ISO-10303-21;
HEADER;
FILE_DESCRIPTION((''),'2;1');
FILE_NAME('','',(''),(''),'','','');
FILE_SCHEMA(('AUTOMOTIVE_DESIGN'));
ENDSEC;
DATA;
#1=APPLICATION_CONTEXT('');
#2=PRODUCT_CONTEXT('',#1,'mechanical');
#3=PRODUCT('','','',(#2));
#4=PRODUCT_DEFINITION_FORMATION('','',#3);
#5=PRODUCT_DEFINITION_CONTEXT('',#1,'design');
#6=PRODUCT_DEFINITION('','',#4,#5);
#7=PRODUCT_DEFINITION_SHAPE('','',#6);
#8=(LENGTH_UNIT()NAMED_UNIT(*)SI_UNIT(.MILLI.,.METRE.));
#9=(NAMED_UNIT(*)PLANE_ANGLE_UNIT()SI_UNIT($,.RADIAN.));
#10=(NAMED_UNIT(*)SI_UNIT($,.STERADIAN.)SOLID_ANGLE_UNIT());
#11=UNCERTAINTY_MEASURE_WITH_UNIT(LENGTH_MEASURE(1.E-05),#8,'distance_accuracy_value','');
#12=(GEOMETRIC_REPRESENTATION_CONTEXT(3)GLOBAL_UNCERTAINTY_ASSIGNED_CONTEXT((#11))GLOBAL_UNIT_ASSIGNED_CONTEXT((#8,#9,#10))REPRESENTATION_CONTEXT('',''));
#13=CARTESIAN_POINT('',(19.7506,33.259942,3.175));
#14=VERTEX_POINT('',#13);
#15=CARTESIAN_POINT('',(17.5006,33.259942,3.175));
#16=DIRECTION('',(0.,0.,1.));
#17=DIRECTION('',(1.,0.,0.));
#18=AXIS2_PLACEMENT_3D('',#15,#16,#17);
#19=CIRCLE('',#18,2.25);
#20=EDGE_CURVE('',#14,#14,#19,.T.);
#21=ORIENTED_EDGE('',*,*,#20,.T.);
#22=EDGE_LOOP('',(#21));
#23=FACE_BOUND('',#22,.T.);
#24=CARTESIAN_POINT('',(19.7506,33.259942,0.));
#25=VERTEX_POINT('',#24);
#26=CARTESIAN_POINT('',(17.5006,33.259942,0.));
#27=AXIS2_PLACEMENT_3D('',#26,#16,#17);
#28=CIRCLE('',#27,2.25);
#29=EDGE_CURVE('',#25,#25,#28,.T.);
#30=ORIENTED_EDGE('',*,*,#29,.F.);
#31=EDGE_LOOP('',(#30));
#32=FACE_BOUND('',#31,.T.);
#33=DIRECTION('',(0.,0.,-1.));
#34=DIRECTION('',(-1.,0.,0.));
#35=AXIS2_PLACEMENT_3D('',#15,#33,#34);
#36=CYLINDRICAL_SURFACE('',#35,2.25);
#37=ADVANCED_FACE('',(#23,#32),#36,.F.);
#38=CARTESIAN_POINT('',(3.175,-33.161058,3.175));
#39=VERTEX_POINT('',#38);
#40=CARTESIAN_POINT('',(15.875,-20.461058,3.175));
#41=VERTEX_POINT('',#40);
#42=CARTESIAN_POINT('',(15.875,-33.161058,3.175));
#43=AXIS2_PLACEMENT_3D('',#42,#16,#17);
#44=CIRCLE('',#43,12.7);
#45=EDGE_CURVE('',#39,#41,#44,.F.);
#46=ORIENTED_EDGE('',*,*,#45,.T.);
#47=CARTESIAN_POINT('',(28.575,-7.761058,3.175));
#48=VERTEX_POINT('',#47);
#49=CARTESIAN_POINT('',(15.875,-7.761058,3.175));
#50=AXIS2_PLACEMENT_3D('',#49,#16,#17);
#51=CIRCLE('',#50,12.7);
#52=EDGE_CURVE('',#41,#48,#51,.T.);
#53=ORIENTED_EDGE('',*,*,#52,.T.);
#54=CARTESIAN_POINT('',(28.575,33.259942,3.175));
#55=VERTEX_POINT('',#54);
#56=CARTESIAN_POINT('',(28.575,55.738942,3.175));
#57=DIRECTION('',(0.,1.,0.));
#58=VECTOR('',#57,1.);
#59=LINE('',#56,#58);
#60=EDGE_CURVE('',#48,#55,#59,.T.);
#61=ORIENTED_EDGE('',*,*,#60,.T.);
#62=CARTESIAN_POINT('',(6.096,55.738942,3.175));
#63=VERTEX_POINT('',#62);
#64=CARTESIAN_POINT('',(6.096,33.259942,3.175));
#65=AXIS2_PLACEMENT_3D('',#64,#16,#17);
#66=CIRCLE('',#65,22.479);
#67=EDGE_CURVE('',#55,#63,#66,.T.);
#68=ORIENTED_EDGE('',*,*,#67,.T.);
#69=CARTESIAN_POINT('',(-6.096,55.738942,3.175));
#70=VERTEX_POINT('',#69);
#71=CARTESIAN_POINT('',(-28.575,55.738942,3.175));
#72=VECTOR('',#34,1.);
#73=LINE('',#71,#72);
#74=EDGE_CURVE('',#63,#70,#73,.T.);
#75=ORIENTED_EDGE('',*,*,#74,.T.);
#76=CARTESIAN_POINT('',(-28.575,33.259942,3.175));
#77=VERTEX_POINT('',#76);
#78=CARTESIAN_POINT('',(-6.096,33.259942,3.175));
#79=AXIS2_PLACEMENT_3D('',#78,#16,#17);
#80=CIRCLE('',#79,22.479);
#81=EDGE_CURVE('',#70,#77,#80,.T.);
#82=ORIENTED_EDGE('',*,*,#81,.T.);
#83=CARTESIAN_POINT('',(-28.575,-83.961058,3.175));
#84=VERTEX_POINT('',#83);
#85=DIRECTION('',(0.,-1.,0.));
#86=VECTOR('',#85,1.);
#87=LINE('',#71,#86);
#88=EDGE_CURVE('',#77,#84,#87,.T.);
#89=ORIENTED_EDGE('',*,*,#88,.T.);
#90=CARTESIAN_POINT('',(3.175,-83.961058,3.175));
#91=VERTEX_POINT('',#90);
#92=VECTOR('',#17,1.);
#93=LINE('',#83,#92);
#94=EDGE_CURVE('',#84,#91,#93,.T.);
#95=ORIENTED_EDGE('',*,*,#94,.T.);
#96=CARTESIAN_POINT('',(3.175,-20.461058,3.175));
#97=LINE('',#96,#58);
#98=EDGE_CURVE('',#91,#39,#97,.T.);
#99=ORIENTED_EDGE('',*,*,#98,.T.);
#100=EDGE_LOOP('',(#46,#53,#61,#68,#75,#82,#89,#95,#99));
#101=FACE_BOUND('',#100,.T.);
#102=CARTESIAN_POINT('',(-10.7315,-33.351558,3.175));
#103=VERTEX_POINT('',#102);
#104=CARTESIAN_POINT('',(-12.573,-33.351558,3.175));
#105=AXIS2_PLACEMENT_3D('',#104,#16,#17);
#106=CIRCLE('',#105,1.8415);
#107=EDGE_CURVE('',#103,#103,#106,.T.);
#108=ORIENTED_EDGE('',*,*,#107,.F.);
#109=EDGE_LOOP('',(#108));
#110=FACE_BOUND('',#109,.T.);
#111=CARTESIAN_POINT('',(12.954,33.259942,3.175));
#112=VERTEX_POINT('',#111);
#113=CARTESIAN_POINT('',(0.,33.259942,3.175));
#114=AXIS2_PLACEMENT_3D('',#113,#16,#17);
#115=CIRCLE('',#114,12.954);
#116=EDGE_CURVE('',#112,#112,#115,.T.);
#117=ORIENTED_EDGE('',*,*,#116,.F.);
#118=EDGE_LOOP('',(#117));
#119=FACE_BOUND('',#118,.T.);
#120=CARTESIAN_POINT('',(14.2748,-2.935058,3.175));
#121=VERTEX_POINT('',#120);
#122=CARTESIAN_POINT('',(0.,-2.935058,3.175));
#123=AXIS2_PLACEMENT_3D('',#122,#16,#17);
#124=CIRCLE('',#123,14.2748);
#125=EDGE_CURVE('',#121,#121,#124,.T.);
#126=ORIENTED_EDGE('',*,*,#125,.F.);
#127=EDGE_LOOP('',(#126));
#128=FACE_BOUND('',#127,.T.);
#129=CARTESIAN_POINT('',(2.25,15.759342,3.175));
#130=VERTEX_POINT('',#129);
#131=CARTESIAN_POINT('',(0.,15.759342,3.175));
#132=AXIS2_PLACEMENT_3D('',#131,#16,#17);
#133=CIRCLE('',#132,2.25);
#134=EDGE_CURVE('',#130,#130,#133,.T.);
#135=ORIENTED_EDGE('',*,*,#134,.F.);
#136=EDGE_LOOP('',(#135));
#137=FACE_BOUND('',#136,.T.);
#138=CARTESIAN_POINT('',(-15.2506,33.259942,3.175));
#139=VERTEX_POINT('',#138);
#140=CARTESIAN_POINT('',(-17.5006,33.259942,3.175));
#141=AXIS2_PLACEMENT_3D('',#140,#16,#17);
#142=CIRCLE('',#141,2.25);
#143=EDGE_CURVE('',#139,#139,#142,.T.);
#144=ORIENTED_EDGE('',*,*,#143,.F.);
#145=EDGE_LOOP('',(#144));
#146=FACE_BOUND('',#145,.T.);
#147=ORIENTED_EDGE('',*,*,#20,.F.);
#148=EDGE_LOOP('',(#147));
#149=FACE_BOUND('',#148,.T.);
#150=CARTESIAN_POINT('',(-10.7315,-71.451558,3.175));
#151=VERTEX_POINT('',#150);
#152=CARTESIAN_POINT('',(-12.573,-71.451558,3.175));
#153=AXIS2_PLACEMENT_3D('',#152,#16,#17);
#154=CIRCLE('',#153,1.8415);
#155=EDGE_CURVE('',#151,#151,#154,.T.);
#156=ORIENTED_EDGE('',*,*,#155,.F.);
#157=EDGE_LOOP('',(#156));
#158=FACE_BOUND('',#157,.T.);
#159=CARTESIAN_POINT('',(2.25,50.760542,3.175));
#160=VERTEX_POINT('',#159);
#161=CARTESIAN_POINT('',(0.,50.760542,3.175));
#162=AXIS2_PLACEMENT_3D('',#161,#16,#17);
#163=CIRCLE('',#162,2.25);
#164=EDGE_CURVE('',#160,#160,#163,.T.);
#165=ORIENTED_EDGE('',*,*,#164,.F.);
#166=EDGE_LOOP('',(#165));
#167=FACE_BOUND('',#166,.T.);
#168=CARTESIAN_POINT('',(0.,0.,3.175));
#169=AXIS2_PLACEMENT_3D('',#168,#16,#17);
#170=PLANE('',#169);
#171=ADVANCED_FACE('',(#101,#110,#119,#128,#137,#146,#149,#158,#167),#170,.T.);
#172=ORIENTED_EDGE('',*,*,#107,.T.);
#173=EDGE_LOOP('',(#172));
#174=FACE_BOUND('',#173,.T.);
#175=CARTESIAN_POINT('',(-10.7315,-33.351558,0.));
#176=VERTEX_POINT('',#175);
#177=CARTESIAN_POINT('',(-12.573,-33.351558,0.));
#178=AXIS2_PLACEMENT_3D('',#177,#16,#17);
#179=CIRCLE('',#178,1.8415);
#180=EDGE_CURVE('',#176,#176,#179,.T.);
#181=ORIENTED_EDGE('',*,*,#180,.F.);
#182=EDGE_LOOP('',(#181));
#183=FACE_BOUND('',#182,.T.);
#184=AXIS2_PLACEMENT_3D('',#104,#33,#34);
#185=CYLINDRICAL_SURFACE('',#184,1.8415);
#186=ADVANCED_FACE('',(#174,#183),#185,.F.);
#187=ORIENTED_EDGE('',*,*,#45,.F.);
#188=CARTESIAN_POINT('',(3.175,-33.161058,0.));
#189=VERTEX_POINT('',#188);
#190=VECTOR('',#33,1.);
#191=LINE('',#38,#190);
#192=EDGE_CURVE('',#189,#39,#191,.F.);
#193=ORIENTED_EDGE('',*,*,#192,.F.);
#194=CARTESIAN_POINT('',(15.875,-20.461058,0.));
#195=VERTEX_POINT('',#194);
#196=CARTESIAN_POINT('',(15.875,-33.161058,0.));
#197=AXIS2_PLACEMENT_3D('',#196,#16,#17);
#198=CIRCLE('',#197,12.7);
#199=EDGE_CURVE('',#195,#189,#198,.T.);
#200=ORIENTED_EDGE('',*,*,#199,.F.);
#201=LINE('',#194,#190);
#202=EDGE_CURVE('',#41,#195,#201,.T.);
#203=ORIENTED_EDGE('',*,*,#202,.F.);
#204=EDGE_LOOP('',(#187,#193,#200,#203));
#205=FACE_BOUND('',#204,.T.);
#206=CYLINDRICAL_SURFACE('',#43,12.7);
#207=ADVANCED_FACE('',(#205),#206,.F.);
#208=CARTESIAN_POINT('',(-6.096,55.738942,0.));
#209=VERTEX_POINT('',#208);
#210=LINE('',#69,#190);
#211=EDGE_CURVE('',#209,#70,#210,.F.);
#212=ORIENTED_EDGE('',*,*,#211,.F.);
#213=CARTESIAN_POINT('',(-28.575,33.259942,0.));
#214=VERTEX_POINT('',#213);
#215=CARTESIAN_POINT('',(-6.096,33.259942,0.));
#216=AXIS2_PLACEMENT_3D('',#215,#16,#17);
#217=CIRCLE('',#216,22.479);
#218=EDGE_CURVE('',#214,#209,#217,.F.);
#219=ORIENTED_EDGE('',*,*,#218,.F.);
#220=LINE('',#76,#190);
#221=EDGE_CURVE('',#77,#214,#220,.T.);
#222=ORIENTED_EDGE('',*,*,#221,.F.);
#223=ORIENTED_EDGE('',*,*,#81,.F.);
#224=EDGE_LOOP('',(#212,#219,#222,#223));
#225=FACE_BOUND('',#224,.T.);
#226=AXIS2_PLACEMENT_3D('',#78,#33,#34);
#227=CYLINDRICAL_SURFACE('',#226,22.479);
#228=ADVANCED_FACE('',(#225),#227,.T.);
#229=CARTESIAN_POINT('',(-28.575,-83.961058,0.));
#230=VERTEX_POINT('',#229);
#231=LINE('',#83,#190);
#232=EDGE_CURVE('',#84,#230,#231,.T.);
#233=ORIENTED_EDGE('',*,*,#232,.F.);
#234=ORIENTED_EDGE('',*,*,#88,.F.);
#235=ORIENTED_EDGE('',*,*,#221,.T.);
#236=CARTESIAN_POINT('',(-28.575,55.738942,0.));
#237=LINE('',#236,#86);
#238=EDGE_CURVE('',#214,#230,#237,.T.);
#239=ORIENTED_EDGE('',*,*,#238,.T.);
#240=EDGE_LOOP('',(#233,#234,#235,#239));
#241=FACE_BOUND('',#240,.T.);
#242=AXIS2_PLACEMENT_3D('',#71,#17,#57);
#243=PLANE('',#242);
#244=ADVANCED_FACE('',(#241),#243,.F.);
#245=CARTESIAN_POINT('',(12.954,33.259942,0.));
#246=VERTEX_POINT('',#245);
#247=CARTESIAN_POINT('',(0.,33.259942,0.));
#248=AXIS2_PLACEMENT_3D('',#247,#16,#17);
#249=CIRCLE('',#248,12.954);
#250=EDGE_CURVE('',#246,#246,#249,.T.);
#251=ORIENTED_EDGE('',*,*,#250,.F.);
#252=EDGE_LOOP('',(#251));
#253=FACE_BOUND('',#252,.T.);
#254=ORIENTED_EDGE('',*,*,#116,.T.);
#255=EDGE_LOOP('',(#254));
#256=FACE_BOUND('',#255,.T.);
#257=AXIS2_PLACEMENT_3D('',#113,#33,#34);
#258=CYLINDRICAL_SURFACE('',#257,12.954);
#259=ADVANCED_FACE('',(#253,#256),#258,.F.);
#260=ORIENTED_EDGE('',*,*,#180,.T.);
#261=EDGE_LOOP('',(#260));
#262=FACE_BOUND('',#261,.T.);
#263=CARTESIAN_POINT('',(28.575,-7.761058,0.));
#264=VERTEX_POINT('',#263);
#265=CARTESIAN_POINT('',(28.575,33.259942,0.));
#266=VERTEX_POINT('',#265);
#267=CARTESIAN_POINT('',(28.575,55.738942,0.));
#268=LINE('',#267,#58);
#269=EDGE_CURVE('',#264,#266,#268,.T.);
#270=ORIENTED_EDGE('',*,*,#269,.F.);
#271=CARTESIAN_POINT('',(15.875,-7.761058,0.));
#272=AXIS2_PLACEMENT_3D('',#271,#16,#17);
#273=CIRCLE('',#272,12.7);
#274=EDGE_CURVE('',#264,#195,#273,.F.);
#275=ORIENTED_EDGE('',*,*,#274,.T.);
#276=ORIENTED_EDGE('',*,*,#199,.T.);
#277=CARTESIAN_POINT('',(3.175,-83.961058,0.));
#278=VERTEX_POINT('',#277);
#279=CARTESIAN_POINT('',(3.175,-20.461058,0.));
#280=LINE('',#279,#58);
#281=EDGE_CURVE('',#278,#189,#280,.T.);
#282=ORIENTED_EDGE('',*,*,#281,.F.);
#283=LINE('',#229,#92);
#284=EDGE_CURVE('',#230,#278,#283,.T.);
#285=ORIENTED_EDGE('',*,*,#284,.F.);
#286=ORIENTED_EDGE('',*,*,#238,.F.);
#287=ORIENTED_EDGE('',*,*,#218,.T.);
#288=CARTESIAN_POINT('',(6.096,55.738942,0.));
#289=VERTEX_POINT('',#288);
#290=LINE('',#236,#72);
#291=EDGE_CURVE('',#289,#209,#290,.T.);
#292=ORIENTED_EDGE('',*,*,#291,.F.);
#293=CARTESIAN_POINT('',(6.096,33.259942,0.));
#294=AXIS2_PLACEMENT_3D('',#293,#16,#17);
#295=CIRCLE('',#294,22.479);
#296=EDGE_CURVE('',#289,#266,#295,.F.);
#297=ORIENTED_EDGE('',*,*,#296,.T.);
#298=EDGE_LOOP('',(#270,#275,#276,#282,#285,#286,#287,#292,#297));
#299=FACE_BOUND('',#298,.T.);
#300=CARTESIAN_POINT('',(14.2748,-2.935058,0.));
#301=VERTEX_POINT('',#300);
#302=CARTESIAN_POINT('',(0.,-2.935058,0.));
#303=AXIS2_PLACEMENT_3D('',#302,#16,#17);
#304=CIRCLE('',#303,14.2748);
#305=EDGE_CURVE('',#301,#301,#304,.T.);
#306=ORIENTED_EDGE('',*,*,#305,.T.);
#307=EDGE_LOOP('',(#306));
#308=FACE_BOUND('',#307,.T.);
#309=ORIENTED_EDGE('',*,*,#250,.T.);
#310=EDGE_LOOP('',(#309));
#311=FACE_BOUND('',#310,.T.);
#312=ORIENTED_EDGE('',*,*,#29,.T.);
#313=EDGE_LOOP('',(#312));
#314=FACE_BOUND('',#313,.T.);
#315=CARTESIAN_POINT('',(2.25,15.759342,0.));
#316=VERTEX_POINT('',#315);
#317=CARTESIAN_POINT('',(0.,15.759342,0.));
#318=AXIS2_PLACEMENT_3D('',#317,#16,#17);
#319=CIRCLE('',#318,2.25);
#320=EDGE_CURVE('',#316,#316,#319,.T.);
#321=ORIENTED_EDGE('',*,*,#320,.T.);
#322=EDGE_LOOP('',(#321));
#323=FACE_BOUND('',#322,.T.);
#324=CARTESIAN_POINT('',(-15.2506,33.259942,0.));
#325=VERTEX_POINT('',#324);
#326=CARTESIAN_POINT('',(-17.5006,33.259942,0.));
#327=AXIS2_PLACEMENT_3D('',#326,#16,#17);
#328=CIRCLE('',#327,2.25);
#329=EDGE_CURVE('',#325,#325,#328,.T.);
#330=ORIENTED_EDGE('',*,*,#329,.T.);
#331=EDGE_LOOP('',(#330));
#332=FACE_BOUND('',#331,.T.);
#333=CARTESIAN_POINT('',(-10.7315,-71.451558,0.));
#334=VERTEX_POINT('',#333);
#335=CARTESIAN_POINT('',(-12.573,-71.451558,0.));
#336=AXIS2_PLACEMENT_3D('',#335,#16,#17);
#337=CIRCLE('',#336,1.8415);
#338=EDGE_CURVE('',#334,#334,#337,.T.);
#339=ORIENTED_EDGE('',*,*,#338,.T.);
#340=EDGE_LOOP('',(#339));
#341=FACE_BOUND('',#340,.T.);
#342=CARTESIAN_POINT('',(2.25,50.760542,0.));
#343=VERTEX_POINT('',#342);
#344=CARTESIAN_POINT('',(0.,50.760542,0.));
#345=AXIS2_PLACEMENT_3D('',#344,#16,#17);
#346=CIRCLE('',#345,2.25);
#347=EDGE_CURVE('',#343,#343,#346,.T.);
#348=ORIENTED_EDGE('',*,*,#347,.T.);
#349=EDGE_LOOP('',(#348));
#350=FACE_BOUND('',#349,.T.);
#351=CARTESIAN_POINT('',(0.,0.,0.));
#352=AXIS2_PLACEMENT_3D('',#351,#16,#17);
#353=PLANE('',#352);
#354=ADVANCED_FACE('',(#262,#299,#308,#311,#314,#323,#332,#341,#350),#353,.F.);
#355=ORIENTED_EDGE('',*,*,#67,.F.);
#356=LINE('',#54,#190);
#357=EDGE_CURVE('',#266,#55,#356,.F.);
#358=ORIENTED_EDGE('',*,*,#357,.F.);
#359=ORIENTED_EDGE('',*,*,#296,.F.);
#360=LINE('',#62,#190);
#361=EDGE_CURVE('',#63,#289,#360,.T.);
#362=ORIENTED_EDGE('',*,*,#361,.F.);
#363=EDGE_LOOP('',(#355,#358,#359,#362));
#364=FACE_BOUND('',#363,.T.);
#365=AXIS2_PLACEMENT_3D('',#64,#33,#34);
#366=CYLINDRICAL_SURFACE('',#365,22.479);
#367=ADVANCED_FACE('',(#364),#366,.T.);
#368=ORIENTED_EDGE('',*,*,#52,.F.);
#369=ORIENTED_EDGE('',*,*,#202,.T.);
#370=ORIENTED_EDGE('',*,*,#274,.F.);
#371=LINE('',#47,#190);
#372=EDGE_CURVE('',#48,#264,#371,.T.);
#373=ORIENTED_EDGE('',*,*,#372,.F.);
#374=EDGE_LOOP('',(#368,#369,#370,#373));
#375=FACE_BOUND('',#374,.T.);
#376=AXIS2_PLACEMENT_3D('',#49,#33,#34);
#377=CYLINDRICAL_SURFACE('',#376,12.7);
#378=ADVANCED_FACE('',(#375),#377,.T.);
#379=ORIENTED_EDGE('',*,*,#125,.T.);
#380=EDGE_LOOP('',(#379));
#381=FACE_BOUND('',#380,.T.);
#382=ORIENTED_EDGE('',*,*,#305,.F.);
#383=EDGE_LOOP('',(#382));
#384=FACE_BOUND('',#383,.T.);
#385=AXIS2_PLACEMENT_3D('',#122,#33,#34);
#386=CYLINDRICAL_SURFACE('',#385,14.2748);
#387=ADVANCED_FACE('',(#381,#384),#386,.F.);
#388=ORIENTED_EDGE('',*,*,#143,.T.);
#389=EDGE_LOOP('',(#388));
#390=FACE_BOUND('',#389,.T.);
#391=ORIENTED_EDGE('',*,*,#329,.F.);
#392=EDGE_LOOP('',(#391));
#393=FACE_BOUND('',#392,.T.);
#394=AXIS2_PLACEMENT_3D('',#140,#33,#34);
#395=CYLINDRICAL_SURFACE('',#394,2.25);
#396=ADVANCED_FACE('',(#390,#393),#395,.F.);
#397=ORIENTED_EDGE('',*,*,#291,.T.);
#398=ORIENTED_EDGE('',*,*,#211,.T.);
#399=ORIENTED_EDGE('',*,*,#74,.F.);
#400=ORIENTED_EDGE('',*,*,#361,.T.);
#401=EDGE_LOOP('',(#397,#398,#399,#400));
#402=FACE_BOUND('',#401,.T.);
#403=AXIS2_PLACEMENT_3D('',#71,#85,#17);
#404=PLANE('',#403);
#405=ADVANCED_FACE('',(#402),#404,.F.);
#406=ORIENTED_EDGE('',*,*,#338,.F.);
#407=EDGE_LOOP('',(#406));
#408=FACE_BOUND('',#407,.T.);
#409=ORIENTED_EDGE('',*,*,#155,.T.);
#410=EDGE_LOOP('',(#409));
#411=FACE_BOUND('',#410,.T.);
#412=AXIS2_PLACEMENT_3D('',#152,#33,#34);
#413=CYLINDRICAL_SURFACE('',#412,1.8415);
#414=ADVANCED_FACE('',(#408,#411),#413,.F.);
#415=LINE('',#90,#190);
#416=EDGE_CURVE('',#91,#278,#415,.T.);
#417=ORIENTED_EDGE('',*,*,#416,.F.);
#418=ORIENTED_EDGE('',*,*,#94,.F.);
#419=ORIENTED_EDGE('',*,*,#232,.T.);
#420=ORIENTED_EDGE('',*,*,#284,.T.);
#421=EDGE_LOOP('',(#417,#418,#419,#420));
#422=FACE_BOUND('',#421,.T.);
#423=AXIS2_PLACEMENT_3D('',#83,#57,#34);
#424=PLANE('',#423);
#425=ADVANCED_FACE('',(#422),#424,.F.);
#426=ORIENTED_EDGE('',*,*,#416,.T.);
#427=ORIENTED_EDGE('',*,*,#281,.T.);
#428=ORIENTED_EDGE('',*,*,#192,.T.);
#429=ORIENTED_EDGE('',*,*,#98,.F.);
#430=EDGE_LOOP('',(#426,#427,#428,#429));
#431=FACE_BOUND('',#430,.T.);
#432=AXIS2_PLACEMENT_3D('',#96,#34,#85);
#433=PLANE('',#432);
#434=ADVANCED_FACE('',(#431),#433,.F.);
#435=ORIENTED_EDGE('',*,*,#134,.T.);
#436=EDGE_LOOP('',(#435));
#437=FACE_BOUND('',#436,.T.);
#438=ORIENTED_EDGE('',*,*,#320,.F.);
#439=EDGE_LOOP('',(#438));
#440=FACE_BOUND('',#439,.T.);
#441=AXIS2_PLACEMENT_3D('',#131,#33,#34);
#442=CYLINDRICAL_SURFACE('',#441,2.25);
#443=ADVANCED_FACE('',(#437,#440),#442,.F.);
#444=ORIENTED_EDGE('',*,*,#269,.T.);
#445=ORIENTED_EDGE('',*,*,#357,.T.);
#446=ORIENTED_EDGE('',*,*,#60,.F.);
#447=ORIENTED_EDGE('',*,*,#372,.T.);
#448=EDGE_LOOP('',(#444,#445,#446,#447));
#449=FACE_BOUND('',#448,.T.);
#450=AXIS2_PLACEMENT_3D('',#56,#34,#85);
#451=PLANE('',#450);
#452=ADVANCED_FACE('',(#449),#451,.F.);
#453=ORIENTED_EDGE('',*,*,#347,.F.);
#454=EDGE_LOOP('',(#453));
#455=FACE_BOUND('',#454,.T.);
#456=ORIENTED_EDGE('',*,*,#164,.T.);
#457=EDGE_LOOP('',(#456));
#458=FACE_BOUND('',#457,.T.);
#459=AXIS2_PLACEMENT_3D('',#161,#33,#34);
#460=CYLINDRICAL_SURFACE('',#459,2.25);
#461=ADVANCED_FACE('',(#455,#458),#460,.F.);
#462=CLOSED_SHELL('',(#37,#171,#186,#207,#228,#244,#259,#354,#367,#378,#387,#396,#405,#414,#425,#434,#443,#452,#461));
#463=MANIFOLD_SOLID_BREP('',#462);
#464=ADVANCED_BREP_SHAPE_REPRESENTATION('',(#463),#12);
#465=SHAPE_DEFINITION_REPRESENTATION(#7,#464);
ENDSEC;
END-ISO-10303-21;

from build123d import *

# Parameters (mm, degrees)
SKETCH1_R           = 12.954
SKETCH1_R_2         = 2.25
SKETCH1_R_3         = 14.2748
SKETCH1_R_4         = 1.8415
BOSS_EXTRUDE1_DEPTH = 3.175
FILLET1_R           = 22.479
FILLET2_START       = -1
FILLET2_DEPTH       = 5
FILLET2_2_DEPTH     = 3.175


with BuildPart() as part:
    # Sketch1 → Boss-Extrude1 (new body)
    with BuildSketch(Plane.XY):
        Polygon((28.575, -20.461058414), (3.175, -20.461058414), (3.175, -83.961058414), (-28.575, -83.961058414), (-28.575, 55.738941586), (28.575, 55.738941586), align=None)
        with Locations((0, 33.259941586)):
            Circle(SKETCH1_R, mode=Mode.SUBTRACT)
        with Locations((0, 50.760541586)):
            Circle(SKETCH1_R_2, mode=Mode.SUBTRACT)
        with Locations((17.5006, 33.259941586)):
            Circle(SKETCH1_R_2, mode=Mode.SUBTRACT)
        with Locations((0, 15.759341586)):
            Circle(SKETCH1_R_2, mode=Mode.SUBTRACT)
        with Locations((-17.5006, 33.259941586)):
            Circle(SKETCH1_R_2, mode=Mode.SUBTRACT)
        with Locations((0, -2.935058414)):
            Circle(SKETCH1_R_3, mode=Mode.SUBTRACT)
        with Locations((-12.573, -33.351558414)):
            Circle(SKETCH1_R_4, mode=Mode.SUBTRACT)
        with Locations((-12.573, -71.451558414)):
            Circle(SKETCH1_R_4, mode=Mode.SUBTRACT)
    extrude(amount=BOSS_EXTRUDE1_DEPTH)

    # Fillet1
    fillet1_edges = [part.edges().sort_by_distance(p)[0] for p in [
        (-28.575, 55.738941586, 1.5875),
        (28.575, 55.738941586, 1.5875),
    ]]
    fillet(fillet1_edges, radius=FILLET1_R)

    # Fillet2: read off the stored shape, not the designer's step
    # Fillet2 outline → Fillet2 (cut)
    with BuildSketch(Plane.XY.offset(FILLET2_START)):
        with BuildLine():
            ThreePointArc((28.575, -7.761058414), (24.855256121, -16.741314535), (15.875, -20.461058414))
            Line((15.875, -20.461058414), (28.575, -20.461058414))
            Line((28.575, -20.461058414), (28.575, -7.761058414))
        make_face()
    extrude(amount=FILLET2_DEPTH, mode=Mode.SUBTRACT)

    # Fillet2 2 outline → Fillet2 2 (add)
    with BuildSketch(Plane.XY):
        with BuildLine():
            ThreePointArc((3.175, -33.161058414), (6.894743879, -24.180802293), (15.875, -20.461058414))
            Line((15.875, -20.461058414), (3.175, -20.461058414))
            Line((3.175, -20.461058414), (3.175, -33.161058414))
        make_face()
    extrude(amount=FILLET2_2_DEPTH)


solid = part.part
